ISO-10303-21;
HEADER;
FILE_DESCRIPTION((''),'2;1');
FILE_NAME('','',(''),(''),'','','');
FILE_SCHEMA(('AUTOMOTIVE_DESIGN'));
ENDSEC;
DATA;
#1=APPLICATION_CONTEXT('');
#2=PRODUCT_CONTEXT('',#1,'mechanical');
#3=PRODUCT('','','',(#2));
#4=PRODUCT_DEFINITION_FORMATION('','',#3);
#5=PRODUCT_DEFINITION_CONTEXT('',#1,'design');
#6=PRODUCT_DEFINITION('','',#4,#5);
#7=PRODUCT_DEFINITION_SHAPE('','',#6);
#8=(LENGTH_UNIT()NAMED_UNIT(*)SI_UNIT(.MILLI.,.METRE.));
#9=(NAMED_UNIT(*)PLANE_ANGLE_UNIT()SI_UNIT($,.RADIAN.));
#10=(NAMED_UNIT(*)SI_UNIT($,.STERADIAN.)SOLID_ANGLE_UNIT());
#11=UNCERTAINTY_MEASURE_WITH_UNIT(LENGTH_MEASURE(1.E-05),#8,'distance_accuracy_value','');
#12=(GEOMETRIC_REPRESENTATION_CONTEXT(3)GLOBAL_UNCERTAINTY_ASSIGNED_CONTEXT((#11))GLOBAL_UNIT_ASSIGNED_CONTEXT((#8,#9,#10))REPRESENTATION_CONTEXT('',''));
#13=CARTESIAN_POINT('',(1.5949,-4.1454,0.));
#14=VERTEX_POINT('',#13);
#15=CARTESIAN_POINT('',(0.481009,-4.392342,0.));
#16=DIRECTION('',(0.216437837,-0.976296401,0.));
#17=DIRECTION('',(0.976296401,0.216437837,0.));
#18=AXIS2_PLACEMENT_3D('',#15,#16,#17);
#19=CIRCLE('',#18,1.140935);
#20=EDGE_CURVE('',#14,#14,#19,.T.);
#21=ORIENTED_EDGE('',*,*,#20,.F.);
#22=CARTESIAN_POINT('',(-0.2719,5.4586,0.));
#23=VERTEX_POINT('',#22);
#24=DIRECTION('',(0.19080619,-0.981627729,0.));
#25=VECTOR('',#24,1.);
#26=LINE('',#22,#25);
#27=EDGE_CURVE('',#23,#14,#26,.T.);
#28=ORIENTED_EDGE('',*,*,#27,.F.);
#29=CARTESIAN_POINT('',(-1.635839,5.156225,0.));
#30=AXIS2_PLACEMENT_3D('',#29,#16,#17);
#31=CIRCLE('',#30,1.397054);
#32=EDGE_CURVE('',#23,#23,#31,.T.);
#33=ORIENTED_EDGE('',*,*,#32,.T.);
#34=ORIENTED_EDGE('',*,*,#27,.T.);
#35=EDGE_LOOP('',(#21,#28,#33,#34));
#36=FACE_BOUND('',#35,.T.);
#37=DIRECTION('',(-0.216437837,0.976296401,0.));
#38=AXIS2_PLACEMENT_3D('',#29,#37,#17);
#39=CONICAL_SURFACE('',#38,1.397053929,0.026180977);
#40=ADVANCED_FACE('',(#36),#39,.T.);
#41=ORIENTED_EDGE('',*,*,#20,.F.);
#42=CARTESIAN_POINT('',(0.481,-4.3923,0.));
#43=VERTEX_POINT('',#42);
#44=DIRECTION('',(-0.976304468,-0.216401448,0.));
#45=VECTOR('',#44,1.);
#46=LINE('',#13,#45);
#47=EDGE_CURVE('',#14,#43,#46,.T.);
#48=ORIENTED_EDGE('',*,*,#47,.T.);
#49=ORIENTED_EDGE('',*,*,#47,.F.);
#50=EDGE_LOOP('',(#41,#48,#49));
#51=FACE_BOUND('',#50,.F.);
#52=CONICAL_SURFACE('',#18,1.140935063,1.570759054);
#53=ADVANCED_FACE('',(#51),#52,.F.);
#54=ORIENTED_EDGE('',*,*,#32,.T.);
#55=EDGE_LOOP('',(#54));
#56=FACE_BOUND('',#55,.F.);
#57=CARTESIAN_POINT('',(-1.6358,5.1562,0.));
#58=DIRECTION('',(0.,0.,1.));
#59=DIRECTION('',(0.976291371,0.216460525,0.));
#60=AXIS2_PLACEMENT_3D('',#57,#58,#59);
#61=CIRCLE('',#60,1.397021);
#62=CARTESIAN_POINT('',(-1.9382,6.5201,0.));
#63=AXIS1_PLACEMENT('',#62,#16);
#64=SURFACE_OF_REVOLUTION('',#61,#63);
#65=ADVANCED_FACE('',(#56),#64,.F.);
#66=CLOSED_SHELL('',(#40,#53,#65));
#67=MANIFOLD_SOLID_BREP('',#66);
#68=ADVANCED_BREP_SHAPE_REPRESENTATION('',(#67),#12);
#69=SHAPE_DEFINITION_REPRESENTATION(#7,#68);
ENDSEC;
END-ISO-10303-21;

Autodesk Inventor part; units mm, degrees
sketch "Sketch_3" plane through (0, 0, 0) normal (0, 0, 1) x (1, 0, 0)
  line L0 (0.481, -4.3923) -> (-1.9382, 6.5201)
  arc A0 (-0.2719, 5.4586) -> (-1.9382, 6.5201) centre (-1.6358, 5.1562) ccw
  line L1 (-0.2719, 5.4586) -> (1.5949, -4.1454)
  line L2 (1.5949, -4.1454) -> (0.481, -4.3923)
  line L3 (0.481, -4.3923) -> (-1.9382, 6.5201)
revolve "Revolution1" add sketch "Sketch_3" angle 360 about axis through (0.481, -4.3923, 0) along (0.2164396, -0.976296, 0)
ref_plane "rot_XY" through (0, -2.2225, 0) normal (0, 0, 1) x (1, 0, 0)
ref_plane "rot_YZ" through (0, -2.2225, 0) normal (1, 0, 0) x (0, 1, 0)
ref_plane "rot_ZX" through (0, -2.2225, 0) normal (0, 1, 0) x (0, 0, 1)
ref_plane "to_cap_XY" through (0, -2.2225, 0) normal (0, 1, 0) x (1, 0, 0)
ref_plane "to_cap_YZ" through (0, -2.2225, 0) normal (1, 0, 0) x (0, 0, -1)
ref_plane "to_cap_ZX" through (0, -2.2225, 0) normal (0, 0, -1) x (0, 1, 0)
properties part number "M20S3-toggles"
